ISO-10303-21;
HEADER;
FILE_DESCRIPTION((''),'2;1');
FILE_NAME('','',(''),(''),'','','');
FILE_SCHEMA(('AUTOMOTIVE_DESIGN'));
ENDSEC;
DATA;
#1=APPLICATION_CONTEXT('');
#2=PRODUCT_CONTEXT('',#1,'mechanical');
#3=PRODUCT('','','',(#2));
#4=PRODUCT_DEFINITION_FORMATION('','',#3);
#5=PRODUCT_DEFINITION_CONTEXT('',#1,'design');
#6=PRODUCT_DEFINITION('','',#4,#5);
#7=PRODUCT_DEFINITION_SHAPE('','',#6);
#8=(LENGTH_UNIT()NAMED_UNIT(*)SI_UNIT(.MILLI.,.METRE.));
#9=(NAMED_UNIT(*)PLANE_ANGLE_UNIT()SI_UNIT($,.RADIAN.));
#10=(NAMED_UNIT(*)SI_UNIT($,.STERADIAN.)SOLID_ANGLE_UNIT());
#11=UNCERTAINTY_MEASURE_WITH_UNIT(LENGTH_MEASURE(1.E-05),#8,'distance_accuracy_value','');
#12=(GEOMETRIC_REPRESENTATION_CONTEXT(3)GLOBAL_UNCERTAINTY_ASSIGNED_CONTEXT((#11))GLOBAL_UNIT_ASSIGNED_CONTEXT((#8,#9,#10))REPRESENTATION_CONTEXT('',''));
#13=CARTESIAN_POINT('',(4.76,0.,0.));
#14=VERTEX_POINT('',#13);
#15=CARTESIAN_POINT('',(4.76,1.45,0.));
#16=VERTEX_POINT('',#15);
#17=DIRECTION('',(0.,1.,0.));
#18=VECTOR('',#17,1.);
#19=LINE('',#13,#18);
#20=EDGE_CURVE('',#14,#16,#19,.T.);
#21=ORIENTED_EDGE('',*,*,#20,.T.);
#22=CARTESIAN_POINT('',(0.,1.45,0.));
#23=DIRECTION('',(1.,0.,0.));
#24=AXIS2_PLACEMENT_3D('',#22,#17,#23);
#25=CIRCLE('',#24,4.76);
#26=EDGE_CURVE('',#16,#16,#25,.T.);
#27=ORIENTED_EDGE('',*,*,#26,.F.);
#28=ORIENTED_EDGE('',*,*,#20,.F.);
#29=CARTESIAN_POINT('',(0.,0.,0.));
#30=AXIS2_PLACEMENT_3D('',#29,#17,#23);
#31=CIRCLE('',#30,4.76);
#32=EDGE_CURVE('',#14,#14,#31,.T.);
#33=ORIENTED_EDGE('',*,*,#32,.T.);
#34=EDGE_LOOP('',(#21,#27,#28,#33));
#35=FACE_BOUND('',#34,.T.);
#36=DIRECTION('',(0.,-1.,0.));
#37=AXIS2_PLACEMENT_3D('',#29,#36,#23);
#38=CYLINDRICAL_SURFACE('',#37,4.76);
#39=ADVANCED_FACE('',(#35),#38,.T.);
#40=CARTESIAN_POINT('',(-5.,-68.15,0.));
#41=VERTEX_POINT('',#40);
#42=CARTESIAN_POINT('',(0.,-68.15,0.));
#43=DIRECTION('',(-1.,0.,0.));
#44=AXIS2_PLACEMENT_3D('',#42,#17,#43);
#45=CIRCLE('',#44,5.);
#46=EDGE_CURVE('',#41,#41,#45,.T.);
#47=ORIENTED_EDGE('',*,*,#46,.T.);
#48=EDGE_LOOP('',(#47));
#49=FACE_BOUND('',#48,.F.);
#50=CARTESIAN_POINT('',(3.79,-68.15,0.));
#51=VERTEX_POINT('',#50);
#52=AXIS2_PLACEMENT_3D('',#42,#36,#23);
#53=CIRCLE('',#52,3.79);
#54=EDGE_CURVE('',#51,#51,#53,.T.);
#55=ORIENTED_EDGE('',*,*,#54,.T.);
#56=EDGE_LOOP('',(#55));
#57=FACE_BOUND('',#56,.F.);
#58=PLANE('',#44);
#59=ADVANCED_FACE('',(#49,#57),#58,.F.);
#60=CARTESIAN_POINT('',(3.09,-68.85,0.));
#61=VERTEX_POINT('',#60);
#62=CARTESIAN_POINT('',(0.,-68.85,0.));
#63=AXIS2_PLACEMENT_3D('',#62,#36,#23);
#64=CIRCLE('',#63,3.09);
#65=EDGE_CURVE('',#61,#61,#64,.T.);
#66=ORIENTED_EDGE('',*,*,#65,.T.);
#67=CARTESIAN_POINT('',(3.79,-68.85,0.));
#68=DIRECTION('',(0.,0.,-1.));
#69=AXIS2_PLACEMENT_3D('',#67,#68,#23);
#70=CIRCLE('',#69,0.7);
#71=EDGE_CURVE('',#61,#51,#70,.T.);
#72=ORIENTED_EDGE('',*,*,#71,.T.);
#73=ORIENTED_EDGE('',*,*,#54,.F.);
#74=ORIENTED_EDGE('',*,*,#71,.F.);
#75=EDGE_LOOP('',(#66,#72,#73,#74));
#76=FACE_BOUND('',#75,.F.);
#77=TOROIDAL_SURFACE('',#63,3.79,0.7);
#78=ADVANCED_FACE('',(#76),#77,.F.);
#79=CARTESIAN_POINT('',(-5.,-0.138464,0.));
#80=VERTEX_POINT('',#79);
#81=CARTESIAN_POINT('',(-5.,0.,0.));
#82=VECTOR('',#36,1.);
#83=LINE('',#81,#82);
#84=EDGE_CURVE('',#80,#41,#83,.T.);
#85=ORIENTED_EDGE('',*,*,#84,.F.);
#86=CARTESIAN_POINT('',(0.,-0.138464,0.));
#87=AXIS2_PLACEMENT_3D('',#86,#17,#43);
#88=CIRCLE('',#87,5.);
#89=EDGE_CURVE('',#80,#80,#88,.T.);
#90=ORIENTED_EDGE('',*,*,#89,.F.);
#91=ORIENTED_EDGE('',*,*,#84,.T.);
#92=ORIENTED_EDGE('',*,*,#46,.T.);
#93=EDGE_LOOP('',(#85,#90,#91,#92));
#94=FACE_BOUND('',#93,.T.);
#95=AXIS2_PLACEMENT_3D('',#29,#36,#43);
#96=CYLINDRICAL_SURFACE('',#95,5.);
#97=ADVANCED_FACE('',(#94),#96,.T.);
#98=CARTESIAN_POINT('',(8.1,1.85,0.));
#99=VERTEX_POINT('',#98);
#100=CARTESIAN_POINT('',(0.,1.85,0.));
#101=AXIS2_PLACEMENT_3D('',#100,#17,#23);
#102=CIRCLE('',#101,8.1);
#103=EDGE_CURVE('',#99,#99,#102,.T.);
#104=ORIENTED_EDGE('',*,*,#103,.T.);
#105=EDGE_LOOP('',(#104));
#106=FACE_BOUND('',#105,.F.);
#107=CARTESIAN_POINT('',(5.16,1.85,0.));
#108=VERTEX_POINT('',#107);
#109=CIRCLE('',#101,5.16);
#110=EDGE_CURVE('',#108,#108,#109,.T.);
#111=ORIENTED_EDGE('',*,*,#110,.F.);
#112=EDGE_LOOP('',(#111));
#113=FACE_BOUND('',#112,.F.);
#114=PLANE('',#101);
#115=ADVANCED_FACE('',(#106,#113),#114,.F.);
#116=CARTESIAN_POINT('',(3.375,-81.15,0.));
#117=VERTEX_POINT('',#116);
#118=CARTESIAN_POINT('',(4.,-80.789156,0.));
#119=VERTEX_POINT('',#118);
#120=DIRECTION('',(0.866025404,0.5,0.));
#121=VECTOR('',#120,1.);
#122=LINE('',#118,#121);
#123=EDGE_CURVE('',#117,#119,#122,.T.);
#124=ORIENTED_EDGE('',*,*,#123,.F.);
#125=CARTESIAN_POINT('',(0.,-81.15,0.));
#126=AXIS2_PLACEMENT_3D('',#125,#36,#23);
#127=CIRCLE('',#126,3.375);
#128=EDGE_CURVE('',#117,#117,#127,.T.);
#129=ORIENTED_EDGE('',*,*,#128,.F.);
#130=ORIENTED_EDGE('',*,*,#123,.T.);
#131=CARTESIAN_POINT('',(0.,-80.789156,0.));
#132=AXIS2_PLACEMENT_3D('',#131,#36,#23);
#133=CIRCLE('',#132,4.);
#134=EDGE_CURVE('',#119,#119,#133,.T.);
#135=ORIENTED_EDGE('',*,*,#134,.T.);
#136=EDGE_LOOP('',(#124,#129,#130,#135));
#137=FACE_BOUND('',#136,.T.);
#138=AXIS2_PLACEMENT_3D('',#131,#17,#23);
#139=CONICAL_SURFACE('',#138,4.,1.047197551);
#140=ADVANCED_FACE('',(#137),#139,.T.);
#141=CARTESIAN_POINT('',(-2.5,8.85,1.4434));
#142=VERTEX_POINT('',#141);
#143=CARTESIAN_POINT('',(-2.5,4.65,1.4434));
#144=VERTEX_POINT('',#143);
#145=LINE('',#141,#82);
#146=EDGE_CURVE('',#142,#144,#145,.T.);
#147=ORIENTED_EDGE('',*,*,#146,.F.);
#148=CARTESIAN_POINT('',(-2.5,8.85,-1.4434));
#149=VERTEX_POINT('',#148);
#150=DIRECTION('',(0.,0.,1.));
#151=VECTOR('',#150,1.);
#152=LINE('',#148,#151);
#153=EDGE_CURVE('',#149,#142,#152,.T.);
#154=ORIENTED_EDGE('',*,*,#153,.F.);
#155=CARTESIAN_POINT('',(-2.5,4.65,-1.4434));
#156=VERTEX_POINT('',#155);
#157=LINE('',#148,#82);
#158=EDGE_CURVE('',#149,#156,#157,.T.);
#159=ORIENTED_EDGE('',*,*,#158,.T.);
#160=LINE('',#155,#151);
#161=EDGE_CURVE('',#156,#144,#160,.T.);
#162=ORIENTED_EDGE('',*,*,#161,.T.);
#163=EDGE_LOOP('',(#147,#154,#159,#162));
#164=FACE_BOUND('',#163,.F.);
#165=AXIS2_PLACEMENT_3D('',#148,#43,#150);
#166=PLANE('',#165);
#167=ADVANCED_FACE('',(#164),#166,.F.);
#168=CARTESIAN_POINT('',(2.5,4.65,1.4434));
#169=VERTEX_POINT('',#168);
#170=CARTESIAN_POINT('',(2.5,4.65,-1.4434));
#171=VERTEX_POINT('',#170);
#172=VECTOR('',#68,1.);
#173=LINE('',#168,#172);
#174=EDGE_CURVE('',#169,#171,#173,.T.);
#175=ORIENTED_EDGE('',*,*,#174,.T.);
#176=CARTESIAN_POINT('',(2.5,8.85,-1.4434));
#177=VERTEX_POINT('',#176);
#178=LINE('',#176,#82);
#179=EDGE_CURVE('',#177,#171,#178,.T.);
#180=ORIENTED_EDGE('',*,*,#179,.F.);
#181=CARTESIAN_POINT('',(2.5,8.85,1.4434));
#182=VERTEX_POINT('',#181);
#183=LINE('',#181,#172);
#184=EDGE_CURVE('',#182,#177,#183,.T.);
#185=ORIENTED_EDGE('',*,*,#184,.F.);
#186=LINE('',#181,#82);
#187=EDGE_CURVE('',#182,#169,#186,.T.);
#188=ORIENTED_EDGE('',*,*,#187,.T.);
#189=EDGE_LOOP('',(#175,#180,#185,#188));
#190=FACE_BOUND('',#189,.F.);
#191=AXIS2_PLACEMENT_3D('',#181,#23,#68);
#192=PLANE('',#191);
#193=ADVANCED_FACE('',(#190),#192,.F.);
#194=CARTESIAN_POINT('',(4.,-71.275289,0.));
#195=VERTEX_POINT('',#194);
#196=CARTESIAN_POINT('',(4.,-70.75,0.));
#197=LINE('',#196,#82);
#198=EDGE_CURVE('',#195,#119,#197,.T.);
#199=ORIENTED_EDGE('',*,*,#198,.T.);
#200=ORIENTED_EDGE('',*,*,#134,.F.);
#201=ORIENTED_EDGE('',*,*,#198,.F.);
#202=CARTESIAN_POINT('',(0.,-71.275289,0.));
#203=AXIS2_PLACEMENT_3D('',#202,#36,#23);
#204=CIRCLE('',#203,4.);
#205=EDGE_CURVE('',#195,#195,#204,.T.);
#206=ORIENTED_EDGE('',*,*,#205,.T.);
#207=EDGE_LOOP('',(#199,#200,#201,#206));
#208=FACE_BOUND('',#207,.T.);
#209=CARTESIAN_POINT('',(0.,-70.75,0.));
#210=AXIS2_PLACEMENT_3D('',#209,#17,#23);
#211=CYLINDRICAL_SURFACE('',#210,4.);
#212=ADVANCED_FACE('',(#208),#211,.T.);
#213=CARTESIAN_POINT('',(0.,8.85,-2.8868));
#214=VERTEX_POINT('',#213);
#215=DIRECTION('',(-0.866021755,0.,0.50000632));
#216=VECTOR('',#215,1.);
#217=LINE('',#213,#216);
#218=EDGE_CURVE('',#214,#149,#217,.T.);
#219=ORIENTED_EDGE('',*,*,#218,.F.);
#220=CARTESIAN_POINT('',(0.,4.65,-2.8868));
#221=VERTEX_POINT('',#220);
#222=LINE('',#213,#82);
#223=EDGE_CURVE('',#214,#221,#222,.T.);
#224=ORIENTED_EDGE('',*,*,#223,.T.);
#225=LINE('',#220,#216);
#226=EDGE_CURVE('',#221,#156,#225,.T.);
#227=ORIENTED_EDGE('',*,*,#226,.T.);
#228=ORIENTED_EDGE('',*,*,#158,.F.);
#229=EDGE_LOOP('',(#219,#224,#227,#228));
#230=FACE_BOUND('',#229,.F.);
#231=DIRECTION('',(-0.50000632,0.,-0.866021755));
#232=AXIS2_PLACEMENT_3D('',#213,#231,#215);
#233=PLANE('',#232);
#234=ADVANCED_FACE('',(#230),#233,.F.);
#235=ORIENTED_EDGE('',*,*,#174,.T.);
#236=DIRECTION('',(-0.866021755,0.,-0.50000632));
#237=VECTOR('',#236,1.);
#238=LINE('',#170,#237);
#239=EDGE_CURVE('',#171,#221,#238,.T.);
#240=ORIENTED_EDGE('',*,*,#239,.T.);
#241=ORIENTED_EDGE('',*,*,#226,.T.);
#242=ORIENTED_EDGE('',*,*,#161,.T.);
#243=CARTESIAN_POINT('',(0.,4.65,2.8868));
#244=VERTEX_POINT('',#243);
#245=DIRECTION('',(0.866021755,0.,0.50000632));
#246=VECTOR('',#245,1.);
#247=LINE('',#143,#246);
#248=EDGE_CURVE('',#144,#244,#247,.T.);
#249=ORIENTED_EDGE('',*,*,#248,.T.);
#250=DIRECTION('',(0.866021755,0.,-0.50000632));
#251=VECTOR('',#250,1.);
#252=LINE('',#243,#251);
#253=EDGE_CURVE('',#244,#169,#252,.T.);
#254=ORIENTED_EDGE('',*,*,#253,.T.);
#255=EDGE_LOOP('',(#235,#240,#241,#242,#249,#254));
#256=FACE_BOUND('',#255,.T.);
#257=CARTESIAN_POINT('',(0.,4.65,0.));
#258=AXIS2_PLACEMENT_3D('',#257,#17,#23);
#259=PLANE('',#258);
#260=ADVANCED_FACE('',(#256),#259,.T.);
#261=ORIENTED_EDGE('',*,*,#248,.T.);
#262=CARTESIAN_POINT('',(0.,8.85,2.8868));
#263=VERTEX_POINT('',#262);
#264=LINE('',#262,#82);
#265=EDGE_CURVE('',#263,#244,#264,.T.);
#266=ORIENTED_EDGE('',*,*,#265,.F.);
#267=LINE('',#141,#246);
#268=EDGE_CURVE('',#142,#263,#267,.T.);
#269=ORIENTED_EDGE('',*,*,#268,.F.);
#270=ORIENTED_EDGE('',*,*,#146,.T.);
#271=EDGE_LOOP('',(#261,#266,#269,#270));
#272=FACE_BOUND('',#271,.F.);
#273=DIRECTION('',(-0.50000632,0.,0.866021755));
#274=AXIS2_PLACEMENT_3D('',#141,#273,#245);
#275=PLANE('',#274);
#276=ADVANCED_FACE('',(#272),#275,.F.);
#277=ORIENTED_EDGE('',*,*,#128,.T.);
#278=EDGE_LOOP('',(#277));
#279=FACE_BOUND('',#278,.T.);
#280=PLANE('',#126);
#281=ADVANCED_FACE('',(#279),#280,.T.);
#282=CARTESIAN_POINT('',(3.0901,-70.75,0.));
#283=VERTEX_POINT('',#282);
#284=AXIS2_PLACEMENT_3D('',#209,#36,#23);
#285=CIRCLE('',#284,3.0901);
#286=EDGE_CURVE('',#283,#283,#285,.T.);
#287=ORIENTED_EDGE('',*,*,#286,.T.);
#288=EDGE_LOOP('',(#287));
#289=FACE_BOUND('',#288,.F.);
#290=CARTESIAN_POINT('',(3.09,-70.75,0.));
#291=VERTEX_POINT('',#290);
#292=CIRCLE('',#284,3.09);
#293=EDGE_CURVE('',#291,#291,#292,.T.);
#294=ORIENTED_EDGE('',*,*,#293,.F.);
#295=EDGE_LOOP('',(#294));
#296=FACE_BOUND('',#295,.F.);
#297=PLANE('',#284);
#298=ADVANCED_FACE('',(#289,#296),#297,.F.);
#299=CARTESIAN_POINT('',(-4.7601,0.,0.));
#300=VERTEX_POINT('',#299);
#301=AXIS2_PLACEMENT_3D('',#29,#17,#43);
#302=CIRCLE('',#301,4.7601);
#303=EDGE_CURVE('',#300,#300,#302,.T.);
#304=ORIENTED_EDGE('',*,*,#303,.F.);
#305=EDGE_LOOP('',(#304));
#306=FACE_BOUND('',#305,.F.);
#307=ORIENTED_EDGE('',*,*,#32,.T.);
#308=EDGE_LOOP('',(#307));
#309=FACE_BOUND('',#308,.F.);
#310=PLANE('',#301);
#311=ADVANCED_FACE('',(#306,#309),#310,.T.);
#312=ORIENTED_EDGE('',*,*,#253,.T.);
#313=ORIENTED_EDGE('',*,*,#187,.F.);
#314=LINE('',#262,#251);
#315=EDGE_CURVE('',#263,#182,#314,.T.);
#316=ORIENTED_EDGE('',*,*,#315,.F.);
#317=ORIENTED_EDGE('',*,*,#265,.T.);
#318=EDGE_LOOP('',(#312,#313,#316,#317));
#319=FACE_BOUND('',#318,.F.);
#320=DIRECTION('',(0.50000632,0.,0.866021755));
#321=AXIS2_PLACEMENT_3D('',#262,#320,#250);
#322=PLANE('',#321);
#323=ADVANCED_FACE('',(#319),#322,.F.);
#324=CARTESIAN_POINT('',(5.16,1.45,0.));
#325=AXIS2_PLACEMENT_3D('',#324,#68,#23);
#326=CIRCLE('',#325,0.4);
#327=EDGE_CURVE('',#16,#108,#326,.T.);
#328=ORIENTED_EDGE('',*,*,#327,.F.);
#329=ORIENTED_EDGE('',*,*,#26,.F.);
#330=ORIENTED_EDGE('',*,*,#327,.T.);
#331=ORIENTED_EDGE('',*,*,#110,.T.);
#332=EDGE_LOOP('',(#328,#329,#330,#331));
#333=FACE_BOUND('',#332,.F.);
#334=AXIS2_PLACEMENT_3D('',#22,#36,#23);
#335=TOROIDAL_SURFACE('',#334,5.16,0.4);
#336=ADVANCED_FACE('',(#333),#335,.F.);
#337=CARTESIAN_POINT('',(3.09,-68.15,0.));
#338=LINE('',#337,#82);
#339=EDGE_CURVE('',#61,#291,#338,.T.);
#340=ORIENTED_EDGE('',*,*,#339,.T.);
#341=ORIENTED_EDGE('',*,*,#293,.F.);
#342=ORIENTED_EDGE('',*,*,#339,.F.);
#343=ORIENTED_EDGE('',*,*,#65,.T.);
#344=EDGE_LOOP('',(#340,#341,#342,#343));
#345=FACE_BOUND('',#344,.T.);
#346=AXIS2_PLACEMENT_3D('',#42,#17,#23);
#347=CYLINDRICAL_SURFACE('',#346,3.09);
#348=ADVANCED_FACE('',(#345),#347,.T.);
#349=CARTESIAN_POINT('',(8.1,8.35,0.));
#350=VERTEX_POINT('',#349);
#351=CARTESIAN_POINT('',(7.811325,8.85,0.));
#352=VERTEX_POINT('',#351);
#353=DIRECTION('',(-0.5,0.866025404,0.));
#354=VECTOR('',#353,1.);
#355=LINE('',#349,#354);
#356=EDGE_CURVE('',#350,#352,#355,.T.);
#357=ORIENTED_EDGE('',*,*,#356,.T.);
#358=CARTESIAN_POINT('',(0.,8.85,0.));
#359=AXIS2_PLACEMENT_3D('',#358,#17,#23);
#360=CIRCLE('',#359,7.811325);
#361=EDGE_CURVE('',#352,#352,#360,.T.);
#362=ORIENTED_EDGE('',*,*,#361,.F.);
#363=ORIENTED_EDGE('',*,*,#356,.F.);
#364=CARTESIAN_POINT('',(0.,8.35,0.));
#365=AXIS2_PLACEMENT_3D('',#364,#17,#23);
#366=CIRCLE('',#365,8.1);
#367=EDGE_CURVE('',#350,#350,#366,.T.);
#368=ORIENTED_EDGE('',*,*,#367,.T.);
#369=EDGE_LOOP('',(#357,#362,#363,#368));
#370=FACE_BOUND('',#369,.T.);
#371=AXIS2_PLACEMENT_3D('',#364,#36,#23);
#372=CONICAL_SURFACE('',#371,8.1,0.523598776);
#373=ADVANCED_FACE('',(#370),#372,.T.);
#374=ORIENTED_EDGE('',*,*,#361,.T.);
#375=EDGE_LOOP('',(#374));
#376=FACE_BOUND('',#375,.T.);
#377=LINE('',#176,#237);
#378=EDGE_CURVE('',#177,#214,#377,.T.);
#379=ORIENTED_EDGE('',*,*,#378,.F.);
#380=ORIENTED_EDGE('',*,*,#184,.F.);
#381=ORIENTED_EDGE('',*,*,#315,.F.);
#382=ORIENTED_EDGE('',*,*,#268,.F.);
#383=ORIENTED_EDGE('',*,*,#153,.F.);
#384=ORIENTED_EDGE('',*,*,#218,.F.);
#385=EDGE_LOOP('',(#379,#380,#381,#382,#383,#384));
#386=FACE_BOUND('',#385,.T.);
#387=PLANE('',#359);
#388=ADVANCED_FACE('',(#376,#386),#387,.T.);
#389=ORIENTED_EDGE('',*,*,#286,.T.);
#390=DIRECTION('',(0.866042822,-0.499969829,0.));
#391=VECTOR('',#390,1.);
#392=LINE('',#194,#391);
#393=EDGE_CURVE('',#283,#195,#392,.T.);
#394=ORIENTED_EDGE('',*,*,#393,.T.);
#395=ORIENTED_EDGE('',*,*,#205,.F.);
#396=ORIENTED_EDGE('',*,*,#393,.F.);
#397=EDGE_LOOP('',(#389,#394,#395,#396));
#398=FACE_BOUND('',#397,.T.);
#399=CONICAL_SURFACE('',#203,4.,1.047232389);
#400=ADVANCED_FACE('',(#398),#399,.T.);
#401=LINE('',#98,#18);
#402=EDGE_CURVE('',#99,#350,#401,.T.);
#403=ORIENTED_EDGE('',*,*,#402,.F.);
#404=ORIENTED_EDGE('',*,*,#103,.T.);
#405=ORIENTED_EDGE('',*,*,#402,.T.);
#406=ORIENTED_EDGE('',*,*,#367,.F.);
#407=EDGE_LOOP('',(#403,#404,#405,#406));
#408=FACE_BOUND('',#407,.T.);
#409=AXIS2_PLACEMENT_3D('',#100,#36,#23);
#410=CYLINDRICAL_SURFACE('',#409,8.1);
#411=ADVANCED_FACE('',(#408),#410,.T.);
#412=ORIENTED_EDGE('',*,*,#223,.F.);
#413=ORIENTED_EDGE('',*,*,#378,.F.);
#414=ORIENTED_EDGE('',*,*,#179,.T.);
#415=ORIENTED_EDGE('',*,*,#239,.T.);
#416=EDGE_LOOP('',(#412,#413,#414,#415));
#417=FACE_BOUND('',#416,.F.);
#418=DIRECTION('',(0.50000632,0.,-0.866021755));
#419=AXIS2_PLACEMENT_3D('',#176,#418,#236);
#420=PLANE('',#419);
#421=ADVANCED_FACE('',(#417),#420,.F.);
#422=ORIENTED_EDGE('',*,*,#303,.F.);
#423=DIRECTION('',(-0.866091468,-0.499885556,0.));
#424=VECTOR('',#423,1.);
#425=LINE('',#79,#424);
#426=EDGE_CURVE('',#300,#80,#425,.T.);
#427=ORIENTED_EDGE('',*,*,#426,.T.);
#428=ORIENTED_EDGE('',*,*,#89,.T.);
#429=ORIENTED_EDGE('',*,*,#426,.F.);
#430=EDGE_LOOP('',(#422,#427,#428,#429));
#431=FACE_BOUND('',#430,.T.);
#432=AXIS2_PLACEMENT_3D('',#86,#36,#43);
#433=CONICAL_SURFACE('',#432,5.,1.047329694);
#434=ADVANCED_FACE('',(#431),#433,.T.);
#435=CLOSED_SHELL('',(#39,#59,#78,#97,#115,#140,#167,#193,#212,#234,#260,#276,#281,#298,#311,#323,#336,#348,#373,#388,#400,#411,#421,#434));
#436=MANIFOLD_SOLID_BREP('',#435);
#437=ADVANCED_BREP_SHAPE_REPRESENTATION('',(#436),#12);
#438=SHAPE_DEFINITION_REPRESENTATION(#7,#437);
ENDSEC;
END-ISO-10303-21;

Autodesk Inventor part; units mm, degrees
ref_plane "YZ Plane" through (0, 0, 0) normal (1, 0, 0) x (0, 1, 0)
ref_plane "XZ Plane" through (0, 0, 0) normal (0, 1, 0) x (-1, 0, 0)
ref_plane "XY Plane" through (0, 0, 0) normal (0, 0, 1) x (1, 0, 0)
sketch "Sketch1" plane through (0, 0, 0) normal (0, 0, 1) x (1, 0, 0)
  line L0 (0, 0) -> (-5, 0)
  line L1 (-5, 0) -> (-5, -68.15)
  line L2 (-5, -68.15) -> (0, -68.15)
  line L3 (0, -68.15) -> (0, 0)
  line L4 (0, 13.63) -> (0, -81.78) projected
  line L5 (-6, 0) -> (1, 0) projected
  dimension "d1" = 68.15
  dimension "d2" = 5
revolve "Shoulder" add sketch "Sketch1" angle 360 about axis through (0, -68.15, 0) along (0, 1, 0)
sketch "Sketch2" plane through (0, 0, 0) normal (0, 1, 0) x (1, 0, 0)
  circle A0 centre (0, 0) radius 5 projected
  circle A1 centre (0, 0) radius 4.76
  dimension "d3" = 9.52
extrude "Shoulder_neck" add sketch "Sketch2" along normal blind 1.85 contours A1
sketch "Sketch3" plane through (0, 1.85, 0) normal (0, 1, 0) x (1, 0, 0)
  circle A0 centre (0, 0) radius 4.76 projected
  circle A1 centre (0, 0) radius 8.1
  dimension "d6" = 16.2
extrude "Head" add sketch "Sketch3" along normal blind 7 contours A0 | A1
sketch "Sketch4" plane through (0, -68.15, 0) normal (0, -1, 0) x (1, 0, 0)
  circle A0 centre (0, 0) radius 5 projected
  circle A1 centre (0, 0) radius 3.09
  dimension "d9" = 6.18
extrude "Thread_neck" add sketch "Sketch4" along normal blind 2.6 contours A1
sketch "Sketch5" plane through (0, -70.75, 0) normal (0, -1, 0) x (1, 0, 0)
  circle A0 centre (0, 0) radius 3.09 projected
  circle A1 centre (0, 0) radius 4
  dimension "d12" = 8
extrude "Thread_shoulder" add sketch "Sketch5" along normal blind 10.4 contours A0 | A1
sketch "Sketch6" plane through (0, 8.85, 0) normal (0, 1, 0) x (1, 0, 0)
  circle A0 centre (0, 0) radius 8.1 projected
  circle A1 centre (0, 0) radius 2.5 construction
  line L0 (-2.5, 1.4434) -> (-2.5, -1.4434)
  line L1 (-2.5, -1.4434) -> (0, -2.8868)
  line L2 (0, -2.8868) -> (2.5, -1.4434)
  line L3 (2.5, -1.4434) -> (2.5, 1.4434)
  line L4 (2.5, 1.4434) -> (0, 2.8868)
  line L5 (0, 2.8868) -> (-2.5, 1.4434)
  dimension "d15" = 5
extrude "Hex" cut sketch "Sketch6" against normal blind 4.2 contours L5 L4 L3 L2 L1 L0
chamfer "Chamfer1" distance 0.24 angle 30 1 edges at (5, 0, 0) measured on face at (-4.8255, 0, -0.7786)
fillet "Fillet1" radius 0.4 1 edges at (-4.76, 1.85, 0)
chamfer "Chamfer2" distance 0.5 angle 30 1 edges at (-8.1, 8.85, 0) measured on face at (7.9951, 6.5167, 1.2993)
chamfer "Chamfer3" distance 0.625 angle 30 1 edges at (-4, -81.15, 0) measured on face at (0.7574, -81.15, 1.0973)
fillet "Fillet2" radius 0.7 1 edges at (-3.09, -68.15, 0)
chamfer "Chamfer7" distance 0.91 angle 30 1 edges at (-4, -70.75, 0) measured on face at (3.6579, -70.75, -0.3191)
thread "Thread" size "M8x1.25" class "6g" standard "ANSI Metric M Profile" full length
equation "\"d3\" = Shoulder_neck_dia"
equation "\"d4\" = Shoulder_neck_length"
equation "\"d6\" = Head_diameter"
equation "\"d7\" = Head_height"
equation "\"d9\" = Thread_neck_dia"
equation "\"d10\" = Thread_neck_length"
equation "\"d12\" = Thread_diameter"
equation "\"d13\" = Thread_length - Thread_neck_length"
equation "\"d15\" = Hex_size"
equation "\"d16\" = Hex_length"
equation "\"d18\" = -0.5 * Shoulder_neck_dia + 0.5 * Shoulder_diameter"
equation "\"d64\" = -0.5 * Shoulder_neck_dia + 0.5 * Shoulder_diameter"
equation "\"d21\" = 0.1 * Hex_size"
equation "\"d65\" = 0.1 * Hex_size"
equation "\"d23\" = 0.5 * Thread_pitch"
equation "\"d66\" = 0.5 * Thread_pitch"
equation "\"d25\" = Thread_neck_radius"
equation "\"d60\" = -0.5 * Thread_neck_dia + 0.5 * Thread_diameter"
equation "\"d67\" = -0.5 * Thread_neck_dia + 0.5 * Thread_diameter"
equation "\"Shoulder_neck_dia\" = 9.52"
equation "\"Thread_diameter\" = 8"
equation "\"Thread_length\" = 13"
equation "\"Head_diameter\" = 16.2"
equation "\"Head_height\" = 7"
equation "\"Thread_neck_dia\" = 6.18"
equation "\"Hex_size\" = 5"
equation "\"Hex_length\" = 4.2"
equation "\"Thread_pitch\" = 1.25"
equation "\"Shoulder_neck_length\" = 1.85"
equation "\"Thread_neck_length\" = 2.6"
equation "\"Thread_neck_radius\" = 0.7"
equation "\"Shoulder_diameter\" = 10"
properties part number "SCREW, SHOULDER, P, 12.9, 10MMX70MM" material "Steel, High Strength Low Alloy"
